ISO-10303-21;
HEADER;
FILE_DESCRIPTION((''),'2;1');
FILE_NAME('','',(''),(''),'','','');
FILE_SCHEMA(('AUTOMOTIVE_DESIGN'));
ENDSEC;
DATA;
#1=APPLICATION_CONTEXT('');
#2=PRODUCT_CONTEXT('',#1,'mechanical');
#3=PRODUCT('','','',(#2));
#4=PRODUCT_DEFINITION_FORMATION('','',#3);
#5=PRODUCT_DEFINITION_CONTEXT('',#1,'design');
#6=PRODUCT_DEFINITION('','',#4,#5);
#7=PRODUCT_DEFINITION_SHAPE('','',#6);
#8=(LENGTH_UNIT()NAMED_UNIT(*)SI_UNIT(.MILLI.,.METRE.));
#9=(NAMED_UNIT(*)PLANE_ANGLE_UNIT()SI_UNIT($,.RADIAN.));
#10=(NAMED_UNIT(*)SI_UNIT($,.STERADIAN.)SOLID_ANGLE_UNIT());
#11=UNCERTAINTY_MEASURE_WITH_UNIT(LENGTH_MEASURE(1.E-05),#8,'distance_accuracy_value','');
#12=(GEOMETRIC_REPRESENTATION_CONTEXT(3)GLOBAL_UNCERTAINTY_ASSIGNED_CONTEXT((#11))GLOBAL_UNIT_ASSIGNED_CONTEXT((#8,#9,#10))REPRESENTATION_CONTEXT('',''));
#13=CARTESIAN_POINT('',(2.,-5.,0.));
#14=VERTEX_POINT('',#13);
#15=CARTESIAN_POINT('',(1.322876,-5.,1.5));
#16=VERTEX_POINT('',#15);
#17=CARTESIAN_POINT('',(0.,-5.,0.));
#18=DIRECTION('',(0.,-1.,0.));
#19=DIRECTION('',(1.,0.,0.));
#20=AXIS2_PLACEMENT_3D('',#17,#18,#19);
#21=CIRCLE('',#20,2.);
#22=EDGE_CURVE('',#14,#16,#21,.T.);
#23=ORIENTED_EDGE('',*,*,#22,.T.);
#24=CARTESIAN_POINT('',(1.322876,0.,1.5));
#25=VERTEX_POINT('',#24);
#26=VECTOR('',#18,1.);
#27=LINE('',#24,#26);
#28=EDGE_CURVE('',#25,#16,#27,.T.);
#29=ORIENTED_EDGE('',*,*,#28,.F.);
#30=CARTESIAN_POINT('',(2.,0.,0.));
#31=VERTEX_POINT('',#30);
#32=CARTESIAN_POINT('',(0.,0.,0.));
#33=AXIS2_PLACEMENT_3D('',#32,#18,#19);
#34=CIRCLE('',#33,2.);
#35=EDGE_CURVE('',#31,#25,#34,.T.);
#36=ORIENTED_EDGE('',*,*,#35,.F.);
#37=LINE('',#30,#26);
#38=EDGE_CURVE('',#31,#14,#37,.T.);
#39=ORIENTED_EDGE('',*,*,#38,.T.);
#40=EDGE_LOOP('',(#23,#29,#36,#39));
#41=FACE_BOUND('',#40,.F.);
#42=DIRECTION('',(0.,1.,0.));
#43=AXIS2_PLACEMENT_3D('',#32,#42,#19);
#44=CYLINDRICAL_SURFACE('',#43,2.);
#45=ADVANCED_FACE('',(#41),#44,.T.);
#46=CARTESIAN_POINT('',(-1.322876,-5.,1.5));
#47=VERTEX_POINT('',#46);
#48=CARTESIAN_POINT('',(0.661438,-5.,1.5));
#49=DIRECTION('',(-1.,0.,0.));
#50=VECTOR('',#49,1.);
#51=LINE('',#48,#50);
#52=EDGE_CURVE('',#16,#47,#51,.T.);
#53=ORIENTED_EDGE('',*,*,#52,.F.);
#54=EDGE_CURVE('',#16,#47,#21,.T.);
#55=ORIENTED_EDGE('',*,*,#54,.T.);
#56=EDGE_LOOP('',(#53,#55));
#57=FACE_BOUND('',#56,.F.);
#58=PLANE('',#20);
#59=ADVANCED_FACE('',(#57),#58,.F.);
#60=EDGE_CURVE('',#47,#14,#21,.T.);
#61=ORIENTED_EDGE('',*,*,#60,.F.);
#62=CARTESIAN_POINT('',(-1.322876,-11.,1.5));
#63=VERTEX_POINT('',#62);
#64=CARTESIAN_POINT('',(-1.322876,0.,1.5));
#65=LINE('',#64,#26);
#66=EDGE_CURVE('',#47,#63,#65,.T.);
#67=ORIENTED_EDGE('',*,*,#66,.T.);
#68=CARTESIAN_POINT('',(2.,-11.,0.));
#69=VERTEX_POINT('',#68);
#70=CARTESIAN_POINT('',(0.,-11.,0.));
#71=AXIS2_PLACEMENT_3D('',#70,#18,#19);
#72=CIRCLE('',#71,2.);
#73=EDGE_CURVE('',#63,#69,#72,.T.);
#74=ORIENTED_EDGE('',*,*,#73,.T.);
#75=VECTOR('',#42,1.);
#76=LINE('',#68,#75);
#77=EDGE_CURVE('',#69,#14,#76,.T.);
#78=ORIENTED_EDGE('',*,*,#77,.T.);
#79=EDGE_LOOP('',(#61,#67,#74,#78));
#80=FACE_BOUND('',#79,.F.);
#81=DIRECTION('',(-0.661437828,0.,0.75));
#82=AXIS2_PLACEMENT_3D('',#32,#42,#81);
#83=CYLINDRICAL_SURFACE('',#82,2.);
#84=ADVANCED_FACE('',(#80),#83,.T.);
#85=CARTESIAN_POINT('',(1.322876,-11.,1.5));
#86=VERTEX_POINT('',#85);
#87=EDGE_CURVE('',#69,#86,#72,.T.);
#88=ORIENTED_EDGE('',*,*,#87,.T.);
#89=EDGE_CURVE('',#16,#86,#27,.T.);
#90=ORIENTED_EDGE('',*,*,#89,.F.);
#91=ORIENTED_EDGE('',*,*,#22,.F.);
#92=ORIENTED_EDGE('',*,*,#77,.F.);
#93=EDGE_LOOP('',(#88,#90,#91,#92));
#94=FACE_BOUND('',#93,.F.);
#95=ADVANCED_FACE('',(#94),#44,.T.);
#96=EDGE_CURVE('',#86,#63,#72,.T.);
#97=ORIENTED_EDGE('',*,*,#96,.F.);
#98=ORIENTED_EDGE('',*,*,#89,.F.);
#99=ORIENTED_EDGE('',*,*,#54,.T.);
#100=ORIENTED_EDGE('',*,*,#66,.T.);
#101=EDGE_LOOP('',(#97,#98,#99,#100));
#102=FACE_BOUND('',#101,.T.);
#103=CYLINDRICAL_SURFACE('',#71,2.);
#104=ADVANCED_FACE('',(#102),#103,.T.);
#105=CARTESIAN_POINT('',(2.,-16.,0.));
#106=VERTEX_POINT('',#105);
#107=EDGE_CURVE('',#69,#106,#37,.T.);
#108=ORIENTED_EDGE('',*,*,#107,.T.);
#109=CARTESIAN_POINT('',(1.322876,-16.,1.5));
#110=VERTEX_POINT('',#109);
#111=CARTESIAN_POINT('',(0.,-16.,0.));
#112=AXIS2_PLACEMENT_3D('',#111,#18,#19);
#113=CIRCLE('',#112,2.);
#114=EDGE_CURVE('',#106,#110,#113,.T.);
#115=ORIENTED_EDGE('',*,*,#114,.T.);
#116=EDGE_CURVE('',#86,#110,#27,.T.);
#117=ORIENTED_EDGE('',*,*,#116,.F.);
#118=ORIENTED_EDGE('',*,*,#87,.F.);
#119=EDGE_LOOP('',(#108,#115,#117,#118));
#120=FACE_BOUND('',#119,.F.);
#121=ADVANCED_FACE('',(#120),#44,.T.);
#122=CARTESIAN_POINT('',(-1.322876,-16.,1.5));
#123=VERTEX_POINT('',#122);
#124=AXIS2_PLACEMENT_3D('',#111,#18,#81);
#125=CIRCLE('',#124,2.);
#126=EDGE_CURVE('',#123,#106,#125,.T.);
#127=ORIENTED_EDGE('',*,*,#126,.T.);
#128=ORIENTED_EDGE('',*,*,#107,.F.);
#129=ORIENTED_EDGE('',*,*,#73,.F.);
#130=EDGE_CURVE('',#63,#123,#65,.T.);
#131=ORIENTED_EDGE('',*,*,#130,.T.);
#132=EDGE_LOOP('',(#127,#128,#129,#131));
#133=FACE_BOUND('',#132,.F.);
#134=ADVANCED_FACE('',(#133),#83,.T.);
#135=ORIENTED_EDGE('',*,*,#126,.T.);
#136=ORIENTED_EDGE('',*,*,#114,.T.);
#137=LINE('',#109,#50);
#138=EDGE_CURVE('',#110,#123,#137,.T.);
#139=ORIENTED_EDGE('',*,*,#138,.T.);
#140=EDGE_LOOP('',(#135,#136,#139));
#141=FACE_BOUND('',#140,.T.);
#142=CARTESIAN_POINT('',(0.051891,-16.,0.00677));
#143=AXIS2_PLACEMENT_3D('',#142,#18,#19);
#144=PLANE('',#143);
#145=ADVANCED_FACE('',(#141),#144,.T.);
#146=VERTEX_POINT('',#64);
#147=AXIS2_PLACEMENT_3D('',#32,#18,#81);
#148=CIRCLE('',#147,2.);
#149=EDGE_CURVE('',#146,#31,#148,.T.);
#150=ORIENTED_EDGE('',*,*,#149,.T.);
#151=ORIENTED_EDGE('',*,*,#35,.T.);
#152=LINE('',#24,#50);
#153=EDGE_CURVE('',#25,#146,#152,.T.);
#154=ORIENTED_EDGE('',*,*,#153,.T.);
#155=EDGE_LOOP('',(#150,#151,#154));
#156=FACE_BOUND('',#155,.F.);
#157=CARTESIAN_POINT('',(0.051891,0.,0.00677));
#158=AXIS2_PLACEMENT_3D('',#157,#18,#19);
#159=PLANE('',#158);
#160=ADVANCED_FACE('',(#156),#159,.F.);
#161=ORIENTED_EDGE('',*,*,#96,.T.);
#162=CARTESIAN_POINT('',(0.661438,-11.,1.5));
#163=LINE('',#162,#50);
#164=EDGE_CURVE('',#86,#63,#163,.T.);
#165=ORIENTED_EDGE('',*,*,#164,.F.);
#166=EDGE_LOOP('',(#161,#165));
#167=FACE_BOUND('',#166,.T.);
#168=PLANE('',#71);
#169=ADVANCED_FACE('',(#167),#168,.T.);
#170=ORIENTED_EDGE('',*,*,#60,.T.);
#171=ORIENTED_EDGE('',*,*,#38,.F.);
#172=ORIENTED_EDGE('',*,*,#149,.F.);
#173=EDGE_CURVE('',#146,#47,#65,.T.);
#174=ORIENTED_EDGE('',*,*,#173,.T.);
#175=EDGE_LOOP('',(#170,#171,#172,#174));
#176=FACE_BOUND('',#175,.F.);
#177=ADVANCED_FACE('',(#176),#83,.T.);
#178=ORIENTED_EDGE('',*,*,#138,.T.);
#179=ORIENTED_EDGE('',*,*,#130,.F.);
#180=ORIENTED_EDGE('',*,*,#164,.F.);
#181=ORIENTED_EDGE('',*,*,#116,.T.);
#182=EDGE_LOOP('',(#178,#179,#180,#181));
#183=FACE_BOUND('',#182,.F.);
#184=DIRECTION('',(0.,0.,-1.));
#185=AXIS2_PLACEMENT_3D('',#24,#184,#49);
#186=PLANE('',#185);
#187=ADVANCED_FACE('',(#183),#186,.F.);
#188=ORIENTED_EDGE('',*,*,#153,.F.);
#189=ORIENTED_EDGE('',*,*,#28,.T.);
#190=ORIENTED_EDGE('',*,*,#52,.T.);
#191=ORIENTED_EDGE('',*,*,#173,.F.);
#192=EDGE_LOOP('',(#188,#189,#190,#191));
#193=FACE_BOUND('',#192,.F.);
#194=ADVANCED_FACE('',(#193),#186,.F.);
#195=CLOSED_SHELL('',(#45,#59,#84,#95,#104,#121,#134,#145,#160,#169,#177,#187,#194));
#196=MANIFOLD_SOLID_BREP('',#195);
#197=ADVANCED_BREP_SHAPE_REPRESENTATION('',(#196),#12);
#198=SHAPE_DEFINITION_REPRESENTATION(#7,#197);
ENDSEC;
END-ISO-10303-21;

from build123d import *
from build123d import SkipClean  # not in build123d's __all__

# Parameters (mm, degrees)
F1_DEPTH = 16
F3_START = -5
F2_R     = 2
F3_DEPTH = 6


with BuildPart() as f1:
    # F0 (on Front) → F1 (new body)
    with BuildSketch(Plane.XZ):
        with BuildLine():
            ThreePointArc((-1.3228756555, 1.5), (-0.8228756555, -1.8228756555), (2, 0))
            ThreePointArc((2, 0), (1.8228756555, 0.8228756555), (1.3228756555, 1.5))
            Line((1.3228756555, 1.5), (-1.3228756555, 1.5))
        make_face()
    extrude(amount=F1_DEPTH)

    # F2 (on face) → F3 (join)
    with BuildSketch(Plane.XZ.offset(16).offset(F3_START)):
        Circle(F2_R)
    with SkipClean():  # cleaning this boolean's faces spoils the solid; the shape is the same uncleaned
        extrude(amount=-F3_DEPTH)


solid = f1.part
